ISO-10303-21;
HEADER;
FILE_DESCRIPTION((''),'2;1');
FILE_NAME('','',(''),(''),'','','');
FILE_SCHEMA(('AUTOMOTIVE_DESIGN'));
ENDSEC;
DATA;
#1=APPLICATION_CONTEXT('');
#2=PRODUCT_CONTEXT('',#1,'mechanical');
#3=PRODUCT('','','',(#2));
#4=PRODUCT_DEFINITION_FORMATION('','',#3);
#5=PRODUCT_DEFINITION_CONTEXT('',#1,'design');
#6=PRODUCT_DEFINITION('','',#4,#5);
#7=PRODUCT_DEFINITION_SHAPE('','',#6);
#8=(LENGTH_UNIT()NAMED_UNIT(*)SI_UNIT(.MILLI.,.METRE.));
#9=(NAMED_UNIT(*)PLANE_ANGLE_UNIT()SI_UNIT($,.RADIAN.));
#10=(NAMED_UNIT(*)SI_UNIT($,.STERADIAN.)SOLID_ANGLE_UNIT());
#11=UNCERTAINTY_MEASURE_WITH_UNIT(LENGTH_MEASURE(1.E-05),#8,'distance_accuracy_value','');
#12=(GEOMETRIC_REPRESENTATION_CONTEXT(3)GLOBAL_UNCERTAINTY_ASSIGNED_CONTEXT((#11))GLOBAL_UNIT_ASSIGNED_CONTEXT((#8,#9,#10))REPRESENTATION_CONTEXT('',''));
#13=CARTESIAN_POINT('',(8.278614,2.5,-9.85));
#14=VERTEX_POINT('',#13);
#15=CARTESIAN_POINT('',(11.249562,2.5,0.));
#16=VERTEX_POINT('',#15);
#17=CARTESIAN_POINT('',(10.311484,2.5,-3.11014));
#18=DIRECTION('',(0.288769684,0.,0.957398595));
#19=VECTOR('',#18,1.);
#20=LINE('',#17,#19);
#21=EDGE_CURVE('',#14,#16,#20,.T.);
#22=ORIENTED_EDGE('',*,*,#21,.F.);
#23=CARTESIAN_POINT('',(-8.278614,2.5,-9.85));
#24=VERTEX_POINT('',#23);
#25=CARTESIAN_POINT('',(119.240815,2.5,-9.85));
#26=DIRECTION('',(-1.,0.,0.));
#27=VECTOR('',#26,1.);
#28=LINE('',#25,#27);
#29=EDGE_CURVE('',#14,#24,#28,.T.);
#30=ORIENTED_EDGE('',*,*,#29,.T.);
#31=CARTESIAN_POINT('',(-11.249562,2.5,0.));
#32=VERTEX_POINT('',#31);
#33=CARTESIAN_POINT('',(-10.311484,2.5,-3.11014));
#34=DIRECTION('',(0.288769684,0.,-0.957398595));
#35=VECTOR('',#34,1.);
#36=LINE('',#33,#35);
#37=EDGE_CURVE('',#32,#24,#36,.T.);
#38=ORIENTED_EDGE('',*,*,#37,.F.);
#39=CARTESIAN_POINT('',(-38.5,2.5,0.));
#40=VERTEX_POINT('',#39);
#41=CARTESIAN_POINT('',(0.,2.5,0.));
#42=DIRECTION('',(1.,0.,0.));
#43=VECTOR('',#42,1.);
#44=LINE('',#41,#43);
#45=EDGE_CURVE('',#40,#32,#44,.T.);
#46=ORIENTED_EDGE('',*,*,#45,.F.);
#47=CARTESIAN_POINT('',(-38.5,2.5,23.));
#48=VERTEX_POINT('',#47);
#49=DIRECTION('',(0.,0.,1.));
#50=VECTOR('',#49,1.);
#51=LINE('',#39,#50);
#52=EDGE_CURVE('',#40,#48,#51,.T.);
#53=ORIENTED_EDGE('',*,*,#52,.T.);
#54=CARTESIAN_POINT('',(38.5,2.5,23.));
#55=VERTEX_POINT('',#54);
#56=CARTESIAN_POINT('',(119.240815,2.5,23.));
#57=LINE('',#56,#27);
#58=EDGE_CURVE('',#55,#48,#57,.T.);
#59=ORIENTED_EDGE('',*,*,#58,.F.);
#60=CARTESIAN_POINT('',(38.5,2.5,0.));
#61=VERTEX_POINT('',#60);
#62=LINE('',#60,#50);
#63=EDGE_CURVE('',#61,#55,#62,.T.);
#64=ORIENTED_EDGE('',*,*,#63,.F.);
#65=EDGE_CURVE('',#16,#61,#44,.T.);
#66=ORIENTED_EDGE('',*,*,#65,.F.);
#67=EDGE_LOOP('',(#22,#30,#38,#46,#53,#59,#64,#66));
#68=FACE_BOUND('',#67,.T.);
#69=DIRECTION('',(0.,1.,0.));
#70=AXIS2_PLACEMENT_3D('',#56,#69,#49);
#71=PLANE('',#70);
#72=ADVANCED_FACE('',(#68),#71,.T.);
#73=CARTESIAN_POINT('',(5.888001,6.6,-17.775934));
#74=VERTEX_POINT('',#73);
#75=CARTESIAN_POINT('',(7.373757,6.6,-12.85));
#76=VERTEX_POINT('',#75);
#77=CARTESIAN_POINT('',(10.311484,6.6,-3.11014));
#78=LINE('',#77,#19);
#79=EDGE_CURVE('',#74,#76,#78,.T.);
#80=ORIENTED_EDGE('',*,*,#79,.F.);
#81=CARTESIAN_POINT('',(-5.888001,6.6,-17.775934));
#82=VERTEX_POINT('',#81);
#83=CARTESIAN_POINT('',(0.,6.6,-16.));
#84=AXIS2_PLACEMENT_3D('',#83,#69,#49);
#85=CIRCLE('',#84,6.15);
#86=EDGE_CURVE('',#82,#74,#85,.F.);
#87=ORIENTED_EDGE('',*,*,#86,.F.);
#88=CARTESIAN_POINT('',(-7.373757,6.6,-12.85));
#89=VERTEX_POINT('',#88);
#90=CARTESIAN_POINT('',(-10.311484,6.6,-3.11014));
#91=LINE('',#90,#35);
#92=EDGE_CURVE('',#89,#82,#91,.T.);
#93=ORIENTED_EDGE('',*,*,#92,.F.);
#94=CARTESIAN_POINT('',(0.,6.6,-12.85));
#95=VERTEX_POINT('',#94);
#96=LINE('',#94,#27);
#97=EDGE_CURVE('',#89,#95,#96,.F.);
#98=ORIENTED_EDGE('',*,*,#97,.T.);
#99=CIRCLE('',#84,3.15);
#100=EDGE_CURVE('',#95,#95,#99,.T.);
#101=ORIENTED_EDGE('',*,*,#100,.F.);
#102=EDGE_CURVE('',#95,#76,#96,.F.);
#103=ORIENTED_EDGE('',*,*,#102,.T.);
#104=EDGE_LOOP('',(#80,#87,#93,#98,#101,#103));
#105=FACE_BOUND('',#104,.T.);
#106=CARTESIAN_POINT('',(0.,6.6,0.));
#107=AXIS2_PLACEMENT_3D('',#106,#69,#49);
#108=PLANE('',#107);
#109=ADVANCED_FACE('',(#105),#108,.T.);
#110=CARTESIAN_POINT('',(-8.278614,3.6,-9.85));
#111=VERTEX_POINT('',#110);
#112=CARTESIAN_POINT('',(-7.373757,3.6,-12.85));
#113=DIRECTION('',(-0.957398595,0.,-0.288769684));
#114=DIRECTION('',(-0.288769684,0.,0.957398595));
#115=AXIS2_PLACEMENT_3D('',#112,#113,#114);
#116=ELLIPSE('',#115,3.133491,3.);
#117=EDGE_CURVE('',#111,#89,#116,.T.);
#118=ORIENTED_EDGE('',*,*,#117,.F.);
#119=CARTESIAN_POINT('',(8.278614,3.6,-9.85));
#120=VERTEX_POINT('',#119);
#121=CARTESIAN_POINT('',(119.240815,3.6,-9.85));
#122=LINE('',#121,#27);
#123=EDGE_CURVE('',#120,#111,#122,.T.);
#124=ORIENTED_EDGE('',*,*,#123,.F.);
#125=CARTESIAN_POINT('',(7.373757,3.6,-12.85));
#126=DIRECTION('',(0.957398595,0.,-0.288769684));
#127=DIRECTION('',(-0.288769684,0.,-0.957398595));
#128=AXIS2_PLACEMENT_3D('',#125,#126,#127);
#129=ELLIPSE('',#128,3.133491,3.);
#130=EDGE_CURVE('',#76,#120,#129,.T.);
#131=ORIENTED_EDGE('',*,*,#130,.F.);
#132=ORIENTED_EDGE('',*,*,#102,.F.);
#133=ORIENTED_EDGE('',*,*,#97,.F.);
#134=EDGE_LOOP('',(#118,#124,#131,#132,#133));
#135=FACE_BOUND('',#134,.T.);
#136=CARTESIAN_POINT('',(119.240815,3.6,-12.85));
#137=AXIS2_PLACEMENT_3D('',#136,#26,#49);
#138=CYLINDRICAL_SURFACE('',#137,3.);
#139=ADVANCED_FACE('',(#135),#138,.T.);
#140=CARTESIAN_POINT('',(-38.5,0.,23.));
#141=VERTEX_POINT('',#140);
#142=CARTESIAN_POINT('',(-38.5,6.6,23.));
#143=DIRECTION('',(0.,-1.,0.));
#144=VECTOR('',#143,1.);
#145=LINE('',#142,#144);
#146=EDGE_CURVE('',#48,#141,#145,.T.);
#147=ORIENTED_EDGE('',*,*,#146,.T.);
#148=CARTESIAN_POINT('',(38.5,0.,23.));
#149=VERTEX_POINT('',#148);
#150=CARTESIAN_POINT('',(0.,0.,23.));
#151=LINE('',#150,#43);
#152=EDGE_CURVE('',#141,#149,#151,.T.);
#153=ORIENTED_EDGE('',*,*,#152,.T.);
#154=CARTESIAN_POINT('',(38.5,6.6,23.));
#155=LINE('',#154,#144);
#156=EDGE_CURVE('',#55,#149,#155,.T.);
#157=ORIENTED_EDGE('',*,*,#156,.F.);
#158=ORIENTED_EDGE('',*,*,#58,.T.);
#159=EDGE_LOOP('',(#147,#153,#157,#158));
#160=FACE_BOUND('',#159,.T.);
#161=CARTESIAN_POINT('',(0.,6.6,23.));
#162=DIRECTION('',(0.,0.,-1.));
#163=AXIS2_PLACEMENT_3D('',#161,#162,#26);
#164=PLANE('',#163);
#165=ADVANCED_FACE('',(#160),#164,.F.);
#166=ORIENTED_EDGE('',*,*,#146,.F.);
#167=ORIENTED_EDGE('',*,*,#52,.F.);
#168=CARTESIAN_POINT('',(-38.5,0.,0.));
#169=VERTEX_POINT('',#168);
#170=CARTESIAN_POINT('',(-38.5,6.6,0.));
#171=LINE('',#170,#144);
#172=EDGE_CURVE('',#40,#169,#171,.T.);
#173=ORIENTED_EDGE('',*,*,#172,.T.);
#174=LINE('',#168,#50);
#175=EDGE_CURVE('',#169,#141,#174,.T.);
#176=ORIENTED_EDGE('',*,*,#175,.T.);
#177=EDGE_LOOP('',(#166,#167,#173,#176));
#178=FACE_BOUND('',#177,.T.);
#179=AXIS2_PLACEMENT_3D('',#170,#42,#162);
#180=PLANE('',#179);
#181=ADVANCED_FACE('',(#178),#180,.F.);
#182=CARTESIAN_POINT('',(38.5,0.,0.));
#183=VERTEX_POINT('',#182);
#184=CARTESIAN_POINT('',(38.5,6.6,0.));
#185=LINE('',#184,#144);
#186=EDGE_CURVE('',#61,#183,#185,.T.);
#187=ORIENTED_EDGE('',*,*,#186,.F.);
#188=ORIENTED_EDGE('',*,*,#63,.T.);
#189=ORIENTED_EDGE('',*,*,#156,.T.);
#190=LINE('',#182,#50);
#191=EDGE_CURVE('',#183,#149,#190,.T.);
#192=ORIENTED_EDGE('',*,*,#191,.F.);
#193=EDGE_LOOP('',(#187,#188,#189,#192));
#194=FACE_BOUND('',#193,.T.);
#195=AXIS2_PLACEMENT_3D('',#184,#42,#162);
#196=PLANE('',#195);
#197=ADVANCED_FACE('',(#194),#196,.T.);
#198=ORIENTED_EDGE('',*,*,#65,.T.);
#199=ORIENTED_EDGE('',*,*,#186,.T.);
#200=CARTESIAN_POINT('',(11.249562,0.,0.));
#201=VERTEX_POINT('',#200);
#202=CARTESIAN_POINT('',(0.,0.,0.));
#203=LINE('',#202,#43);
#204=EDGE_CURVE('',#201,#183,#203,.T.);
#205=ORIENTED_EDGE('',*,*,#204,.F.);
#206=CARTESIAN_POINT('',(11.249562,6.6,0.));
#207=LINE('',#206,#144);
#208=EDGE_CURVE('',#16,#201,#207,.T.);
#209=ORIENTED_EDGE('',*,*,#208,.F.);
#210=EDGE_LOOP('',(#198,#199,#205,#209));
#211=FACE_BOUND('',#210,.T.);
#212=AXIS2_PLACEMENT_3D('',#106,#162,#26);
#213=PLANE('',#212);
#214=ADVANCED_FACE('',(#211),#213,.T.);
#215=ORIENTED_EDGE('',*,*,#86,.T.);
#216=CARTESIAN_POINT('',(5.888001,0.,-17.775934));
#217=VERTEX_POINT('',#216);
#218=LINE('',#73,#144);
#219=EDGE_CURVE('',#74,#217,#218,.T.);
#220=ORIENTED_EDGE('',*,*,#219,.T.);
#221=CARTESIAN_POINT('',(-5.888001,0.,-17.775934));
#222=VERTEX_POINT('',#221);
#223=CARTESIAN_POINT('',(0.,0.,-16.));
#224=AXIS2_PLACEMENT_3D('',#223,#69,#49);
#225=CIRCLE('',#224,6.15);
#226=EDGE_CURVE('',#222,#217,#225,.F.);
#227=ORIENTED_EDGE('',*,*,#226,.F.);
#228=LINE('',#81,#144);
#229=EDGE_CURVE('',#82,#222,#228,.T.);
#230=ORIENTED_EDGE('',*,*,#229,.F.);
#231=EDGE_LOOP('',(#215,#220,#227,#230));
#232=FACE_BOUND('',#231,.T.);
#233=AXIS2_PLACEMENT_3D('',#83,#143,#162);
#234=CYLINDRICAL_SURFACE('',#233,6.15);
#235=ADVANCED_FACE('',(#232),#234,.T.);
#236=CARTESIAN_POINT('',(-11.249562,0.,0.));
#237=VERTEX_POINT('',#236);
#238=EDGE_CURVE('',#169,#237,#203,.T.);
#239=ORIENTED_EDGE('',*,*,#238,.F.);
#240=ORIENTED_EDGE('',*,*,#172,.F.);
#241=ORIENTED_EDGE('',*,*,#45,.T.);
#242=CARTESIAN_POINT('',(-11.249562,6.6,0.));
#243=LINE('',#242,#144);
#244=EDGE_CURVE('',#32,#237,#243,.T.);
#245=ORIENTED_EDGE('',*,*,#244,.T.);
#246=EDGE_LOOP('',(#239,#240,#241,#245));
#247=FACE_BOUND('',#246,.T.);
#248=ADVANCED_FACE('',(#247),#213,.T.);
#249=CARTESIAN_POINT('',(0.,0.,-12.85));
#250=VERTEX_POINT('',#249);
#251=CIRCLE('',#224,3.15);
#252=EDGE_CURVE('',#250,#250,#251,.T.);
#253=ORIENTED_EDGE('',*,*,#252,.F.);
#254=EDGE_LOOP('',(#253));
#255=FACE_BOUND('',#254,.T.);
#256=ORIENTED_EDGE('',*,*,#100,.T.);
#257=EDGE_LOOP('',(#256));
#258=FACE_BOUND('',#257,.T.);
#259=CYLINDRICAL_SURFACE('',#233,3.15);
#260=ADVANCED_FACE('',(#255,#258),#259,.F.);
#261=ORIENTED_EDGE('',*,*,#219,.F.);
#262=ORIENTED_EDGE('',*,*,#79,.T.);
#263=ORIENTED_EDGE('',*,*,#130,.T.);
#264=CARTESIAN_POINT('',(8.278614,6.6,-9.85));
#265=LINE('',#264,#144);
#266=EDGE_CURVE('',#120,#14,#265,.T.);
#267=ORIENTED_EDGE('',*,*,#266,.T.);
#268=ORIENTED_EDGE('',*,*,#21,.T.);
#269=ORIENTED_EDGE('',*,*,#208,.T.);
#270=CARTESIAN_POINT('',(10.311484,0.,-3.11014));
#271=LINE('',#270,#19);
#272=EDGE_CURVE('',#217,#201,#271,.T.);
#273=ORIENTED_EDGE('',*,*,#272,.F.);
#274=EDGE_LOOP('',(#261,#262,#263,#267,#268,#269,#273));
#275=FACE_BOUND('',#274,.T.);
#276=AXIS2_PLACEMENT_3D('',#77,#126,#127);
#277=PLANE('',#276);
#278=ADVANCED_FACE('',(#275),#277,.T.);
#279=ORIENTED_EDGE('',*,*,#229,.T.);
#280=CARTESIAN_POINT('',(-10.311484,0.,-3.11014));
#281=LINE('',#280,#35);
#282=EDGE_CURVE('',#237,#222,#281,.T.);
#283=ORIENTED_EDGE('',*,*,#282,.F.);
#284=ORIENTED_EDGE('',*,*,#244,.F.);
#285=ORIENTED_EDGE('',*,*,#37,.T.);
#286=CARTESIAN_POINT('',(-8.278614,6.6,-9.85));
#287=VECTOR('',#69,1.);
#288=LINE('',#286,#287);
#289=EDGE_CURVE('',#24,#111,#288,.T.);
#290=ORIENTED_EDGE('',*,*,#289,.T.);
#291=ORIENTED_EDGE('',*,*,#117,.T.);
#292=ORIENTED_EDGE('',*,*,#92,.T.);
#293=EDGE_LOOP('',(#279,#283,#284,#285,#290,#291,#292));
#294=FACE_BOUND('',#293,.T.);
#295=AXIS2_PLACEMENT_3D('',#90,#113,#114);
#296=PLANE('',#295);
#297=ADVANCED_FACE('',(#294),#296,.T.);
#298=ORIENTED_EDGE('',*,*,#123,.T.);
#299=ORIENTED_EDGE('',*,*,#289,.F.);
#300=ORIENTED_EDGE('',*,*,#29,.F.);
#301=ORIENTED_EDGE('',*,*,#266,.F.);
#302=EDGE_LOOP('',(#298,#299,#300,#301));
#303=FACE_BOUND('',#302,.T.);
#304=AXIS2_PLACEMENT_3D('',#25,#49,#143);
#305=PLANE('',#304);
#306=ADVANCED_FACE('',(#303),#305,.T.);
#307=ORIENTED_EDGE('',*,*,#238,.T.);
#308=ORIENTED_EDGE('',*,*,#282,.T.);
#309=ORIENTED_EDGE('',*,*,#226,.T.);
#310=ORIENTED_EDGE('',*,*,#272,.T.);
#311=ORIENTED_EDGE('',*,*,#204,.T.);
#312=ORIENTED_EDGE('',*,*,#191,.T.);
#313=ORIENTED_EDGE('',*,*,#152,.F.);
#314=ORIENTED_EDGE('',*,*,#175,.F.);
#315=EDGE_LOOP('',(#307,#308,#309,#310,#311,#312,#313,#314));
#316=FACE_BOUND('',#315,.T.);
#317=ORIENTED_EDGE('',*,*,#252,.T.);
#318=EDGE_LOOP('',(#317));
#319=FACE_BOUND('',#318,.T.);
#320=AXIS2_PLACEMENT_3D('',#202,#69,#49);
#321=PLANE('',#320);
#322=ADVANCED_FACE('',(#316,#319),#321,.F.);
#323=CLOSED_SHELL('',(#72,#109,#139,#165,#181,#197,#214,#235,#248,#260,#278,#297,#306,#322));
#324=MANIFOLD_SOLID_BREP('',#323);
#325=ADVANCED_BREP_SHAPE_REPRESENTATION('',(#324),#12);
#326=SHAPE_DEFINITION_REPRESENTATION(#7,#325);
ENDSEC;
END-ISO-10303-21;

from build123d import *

# Parameters (mm, degrees)
SKETCH_1_R               = 3.15
SKETCH_1_W               = 77
SKETCH_1_H               = 23
EXTRUDE_1_DEPTH          = 6.6
CUT_EXTRUDE_1_DEPTH      = 46.330012133
CUT_EXTRUDE_1_DEPTH_BACK = 46.330012133
FILLET_1_R               = 3


with BuildPart() as part:
    # 草图1 → 凸台-拉伸1 (new body)
    # profile 1 of 2: a face of its own
    with BuildSketch(Plane(origin=(0, 0, 0), x_dir=(1, 0, 0), z_dir=(0, 1, 0))):
        with BuildLine():
            Line((-5.888001359, 17.775933557), (-11.249562098, 0))
            Line((-11.249562098, 0), (11.249562098, 0))
            Line((11.249562098, 0), (5.888001359, 17.775933557))
            ThreePointArc((5.888001359, 17.775933557), (0, 22.15), (-5.888001359, 17.775933557))
        make_face()
        with Locations(Location((0, 16, 0), (0, 0, 270))):
            Circle(SKETCH_1_R, mode=Mode.SUBTRACT)
    # profile 2 of 2: a face of its own
    with BuildSketch(Plane(origin=(0, 0, 0), x_dir=(1, 0, 0), z_dir=(0, 1, 0))):
        with Locations((0, -11.5)):
            Rectangle(SKETCH_1_W, SKETCH_1_H)
    extrude(amount=EXTRUDE_1_DEPTH)

    # 草图2 → 切除-拉伸1 (cut, two sides: drawn at the far end of the back side and taken through both)
    with BuildSketch(Plane(origin=(0, 0, 0), x_dir=(0, 0, -1), z_dir=(1, 0, 0)).offset(-CUT_EXTRUDE_1_DEPTH_BACK)):
        Polygon((-123.671550114, 2.5), (-23, 2.5), (9.85, 2.5), (9.85, 6.6), (9.85, 107.271550114), (-114.442682903, 265.67095979), (-247.964233016, 160.899409677), align=None)
    extrude(amount=CUT_EXTRUDE_1_DEPTH + CUT_EXTRUDE_1_DEPTH_BACK, mode=Mode.SUBTRACT)

    # 圆角1
    fillet_1_edges = [part.edges().sort_by_distance(p)[0] for p in [
        (0, 6.6, -9.85),
    ]]
    fillet(fillet_1_edges, radius=FILLET_1_R - 0.0001)  # a hair under: the kernel refuses the full size


solid = part.part
